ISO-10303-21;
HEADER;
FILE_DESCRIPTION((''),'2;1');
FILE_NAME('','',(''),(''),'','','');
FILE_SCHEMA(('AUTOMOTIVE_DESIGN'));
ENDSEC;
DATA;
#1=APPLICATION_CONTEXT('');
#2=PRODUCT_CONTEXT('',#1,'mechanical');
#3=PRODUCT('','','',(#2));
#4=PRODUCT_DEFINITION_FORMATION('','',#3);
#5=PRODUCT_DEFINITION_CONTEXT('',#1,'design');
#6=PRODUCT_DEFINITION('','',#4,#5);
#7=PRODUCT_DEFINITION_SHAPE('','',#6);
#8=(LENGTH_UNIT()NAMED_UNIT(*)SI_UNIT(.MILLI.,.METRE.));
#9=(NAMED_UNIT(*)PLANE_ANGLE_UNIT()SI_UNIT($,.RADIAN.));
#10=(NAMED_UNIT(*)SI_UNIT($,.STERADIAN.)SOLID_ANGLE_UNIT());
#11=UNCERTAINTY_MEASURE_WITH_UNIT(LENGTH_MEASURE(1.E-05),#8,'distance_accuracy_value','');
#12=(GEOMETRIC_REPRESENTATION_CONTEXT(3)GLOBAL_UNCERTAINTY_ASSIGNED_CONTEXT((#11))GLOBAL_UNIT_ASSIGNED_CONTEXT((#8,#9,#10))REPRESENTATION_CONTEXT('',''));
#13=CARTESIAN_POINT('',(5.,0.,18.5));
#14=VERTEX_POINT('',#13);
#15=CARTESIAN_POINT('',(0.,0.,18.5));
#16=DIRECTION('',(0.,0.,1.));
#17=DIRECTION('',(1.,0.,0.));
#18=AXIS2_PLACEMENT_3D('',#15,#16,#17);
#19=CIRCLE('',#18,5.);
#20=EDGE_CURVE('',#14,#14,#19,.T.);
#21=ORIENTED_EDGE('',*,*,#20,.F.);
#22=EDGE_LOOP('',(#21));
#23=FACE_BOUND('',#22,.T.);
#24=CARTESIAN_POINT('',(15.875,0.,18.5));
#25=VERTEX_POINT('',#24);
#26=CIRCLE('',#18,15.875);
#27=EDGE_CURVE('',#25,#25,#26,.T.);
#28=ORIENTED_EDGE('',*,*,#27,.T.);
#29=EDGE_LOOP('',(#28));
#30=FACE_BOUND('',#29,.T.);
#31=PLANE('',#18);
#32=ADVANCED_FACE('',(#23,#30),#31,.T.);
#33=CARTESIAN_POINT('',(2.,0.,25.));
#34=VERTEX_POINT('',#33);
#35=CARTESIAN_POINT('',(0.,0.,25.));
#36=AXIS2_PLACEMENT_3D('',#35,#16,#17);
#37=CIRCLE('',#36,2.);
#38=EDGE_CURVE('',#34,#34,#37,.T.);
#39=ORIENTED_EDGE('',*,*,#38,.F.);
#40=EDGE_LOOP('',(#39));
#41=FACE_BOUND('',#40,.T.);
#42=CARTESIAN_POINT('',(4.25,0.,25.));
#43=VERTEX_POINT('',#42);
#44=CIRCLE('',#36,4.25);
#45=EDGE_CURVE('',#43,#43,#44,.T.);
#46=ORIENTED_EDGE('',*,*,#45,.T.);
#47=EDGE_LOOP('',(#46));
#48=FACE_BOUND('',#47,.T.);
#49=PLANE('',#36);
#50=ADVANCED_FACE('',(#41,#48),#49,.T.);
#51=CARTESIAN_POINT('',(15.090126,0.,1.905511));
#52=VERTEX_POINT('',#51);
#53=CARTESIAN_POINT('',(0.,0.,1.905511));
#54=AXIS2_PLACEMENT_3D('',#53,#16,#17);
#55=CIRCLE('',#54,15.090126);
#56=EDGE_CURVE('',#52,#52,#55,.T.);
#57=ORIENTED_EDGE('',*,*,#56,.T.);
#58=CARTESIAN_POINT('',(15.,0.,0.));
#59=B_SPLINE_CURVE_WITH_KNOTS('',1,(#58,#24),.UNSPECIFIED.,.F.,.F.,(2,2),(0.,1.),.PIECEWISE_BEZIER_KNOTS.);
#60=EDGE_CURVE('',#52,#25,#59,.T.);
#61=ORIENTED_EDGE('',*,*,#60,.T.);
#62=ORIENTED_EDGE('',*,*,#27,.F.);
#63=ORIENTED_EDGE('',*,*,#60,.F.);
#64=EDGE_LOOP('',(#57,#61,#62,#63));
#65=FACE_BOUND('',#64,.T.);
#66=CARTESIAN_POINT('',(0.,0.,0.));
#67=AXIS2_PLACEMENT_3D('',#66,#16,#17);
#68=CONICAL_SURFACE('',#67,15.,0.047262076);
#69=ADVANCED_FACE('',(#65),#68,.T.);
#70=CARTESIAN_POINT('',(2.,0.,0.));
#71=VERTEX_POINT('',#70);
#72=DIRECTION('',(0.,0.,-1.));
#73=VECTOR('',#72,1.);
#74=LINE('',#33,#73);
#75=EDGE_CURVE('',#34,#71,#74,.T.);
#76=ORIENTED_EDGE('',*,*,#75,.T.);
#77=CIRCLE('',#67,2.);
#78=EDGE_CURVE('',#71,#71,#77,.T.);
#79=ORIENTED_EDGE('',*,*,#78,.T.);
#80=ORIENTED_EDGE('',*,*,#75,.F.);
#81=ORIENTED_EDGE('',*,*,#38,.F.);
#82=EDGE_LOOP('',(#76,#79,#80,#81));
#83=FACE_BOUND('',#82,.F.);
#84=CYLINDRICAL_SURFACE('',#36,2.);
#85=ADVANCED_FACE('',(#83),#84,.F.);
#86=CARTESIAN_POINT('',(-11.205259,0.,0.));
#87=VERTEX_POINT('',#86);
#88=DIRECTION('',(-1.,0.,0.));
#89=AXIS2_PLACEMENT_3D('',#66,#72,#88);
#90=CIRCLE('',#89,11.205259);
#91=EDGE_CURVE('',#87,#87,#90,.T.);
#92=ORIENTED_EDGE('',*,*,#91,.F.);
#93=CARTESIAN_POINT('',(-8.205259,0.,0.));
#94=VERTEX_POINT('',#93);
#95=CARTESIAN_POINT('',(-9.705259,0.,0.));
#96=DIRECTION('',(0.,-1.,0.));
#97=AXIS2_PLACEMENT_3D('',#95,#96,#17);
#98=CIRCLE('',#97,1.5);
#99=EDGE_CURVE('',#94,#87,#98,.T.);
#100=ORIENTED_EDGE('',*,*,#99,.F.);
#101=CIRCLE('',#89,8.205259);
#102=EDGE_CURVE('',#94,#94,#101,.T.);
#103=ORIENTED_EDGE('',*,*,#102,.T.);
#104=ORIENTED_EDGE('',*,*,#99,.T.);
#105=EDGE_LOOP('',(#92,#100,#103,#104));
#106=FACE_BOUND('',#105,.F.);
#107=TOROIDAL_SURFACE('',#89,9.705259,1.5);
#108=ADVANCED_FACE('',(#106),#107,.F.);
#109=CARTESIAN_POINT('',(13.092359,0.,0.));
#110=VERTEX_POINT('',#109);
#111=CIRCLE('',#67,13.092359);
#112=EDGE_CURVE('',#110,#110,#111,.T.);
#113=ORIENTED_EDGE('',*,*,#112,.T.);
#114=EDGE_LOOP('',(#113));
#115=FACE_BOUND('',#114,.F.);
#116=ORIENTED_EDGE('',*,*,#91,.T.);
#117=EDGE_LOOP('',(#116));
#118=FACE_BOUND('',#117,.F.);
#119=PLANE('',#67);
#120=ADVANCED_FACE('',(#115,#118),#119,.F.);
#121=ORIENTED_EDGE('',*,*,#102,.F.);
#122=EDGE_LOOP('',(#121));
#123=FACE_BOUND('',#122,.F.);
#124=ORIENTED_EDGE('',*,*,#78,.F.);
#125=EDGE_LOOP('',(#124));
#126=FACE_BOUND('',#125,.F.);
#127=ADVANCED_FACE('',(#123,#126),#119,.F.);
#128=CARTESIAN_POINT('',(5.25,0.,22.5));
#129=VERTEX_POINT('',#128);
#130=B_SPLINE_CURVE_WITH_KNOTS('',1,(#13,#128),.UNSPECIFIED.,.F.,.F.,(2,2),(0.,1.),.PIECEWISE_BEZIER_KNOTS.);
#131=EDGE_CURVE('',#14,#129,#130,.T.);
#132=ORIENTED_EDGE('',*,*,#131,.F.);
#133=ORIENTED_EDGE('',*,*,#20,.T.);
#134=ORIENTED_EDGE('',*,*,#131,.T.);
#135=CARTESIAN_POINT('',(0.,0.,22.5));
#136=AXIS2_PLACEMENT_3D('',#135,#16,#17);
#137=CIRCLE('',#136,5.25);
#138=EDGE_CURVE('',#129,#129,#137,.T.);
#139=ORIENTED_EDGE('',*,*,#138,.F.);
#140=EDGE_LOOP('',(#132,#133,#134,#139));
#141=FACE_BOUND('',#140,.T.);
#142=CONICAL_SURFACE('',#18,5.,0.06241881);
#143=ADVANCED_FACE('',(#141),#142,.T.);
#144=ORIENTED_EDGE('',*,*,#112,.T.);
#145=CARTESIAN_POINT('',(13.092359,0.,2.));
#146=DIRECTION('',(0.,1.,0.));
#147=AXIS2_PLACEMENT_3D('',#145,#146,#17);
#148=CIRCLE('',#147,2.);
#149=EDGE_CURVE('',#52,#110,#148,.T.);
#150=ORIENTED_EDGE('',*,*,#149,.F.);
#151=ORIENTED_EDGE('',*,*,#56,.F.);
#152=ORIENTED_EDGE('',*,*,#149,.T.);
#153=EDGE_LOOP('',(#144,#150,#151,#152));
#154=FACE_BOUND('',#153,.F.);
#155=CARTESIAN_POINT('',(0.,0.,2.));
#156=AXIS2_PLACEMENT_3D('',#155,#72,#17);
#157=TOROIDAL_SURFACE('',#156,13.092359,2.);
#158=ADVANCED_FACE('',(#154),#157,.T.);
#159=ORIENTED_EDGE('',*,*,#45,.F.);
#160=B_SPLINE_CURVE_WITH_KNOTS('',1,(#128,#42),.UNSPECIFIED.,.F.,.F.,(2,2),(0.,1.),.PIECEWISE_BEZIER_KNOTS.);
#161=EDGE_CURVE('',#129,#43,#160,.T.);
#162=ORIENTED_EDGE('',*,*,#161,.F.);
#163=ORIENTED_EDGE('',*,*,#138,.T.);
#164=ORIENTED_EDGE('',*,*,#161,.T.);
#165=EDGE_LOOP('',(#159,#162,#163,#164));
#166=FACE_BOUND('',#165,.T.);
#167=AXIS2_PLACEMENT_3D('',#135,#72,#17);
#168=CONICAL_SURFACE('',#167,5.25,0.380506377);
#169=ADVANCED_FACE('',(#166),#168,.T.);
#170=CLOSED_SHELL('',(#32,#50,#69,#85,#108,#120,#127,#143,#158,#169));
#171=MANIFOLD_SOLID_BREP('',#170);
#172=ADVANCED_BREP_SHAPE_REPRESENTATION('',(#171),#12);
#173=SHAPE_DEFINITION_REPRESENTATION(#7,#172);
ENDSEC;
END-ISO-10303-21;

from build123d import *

# Parameters (mm, degrees)
F0_R      = 15
F2_R      = 15.875
F4_R      = 5
F6_R      = 5.25
F7_FACE_R = 5.25
F9_R      = 4.25
F11_R     = 2
F12_DEPTH = 25.0010001
F13_R     = 1.5
F15_R     = 2


with BuildPart() as f3:
    # F0 (on Top) → F3 section 0
    with BuildSketch(Plane.XY):
        Circle(F0_R)
    # F2 (on offset) → F3 section 1
    with BuildSketch(Plane.XY.offset(18.5)):
        Circle(F2_R)
    loft()

    # F4 (on face) → F7 section 0
    with BuildSketch(Plane.XY.offset(18.5)):
        Circle(F4_R)
    # F6 (on offset) → F7 section 1
    with BuildSketch(Plane.XY.offset(22.5)):
        Circle(F6_R)
    loft()

    # F7_face (on face) → F10 section 0
    with BuildSketch(Plane.XY.offset(22.5)):
        Circle(F7_FACE_R)
    # F9 (on offset) → F10 section 1
    with BuildSketch(Plane.XY.offset(25)):
        Circle(F9_R)
    loft()

    # F11 (on face) → F12 (cut, through all)
    with BuildSketch(Plane.XY.offset(25)):
        Circle(F11_R)
    extrude(amount=-F12_DEPTH, mode=Mode.SUBTRACT)

    # F13 (on Front) → F14 (revolve, cut)
    with BuildSketch(Plane.XZ):
        with Locations((-9.7052594647, 0)):
            Circle(F13_R)
    revolve(axis=Axis((0, 0, 7.5749068208), (0, 0, -1)), mode=Mode.SUBTRACT)

    # F15
    f15_edges = [f3.edges().sort_by_distance(p)[0] for p in [
        (-15, 0, 0),
    ]]
    fillet(f15_edges, radius=F15_R)


solid = f3.part
